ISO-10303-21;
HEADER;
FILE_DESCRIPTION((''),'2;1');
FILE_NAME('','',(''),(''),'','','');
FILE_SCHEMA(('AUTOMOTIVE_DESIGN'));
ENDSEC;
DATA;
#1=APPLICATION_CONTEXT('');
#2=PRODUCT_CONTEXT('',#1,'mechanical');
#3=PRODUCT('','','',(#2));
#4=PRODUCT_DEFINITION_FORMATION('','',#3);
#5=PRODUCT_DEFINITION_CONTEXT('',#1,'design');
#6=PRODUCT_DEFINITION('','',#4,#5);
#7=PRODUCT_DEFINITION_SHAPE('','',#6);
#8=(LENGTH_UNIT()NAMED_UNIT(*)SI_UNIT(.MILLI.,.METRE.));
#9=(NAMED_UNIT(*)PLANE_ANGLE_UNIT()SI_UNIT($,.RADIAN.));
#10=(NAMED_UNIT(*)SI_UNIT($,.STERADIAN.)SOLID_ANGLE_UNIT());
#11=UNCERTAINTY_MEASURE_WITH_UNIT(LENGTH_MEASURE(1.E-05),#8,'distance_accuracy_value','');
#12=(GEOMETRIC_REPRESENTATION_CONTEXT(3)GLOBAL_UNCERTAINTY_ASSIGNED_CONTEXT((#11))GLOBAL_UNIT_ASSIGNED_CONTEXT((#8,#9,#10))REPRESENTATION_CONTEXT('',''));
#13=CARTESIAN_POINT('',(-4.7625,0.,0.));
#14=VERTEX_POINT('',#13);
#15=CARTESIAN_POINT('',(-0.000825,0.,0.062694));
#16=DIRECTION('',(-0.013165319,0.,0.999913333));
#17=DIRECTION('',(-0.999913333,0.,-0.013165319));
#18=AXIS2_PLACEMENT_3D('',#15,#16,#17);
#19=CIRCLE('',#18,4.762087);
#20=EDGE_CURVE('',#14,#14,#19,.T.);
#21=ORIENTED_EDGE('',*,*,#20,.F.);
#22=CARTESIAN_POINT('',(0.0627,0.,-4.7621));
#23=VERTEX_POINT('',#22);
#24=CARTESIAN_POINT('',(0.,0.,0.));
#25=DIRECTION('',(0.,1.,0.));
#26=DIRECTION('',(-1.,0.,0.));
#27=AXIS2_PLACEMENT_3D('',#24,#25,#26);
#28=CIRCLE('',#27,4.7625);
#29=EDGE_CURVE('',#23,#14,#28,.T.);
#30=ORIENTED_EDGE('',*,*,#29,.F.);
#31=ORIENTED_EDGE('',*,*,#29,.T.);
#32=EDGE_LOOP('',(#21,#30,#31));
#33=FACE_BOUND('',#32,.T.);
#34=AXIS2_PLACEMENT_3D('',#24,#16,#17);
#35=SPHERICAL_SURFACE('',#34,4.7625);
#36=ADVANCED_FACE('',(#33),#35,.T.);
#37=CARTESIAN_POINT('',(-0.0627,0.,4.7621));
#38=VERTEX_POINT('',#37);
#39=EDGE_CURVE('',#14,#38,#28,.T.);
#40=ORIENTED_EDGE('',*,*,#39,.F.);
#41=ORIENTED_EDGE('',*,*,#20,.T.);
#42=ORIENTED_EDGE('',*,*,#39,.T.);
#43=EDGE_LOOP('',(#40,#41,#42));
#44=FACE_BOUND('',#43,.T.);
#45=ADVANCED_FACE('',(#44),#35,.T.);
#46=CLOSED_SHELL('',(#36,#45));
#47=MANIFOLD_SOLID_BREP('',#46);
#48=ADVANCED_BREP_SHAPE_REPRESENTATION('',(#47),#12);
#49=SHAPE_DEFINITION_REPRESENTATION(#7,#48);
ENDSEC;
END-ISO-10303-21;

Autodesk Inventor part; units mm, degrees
ref_plane "YZ Plane" through (0, 0, 0) normal (1, 0, 0) x (0, 1, 0)
ref_plane "XZ Plane" through (0, 0, 0) normal (0, 1, 0) x (-1, 0, 0)
ref_plane "XY Plane" through (0, 0, 0) normal (0, 0, 1) x (1, 0, 0)
sketch "Sketch1" plane through (0, 0, 0) normal (0, 1, 0) x (-1, 0, 0)
  circle A0 centre (0, 0) radius 4.7625
  line L0 (-0.0627, -4.7621) -> (0.0627, 4.7621)
  dimension "d0" = 9.525
revolve "Revolution1" add sketch "Sketch1" angle 360 about axis through (0.0627, 0, -4.7621) along (-0.0131568, 0, 0.9999134) picked at (0.3707, 1.5436) contours A0 L0
properties part number "CasterBall" material "Stainless Steel"
